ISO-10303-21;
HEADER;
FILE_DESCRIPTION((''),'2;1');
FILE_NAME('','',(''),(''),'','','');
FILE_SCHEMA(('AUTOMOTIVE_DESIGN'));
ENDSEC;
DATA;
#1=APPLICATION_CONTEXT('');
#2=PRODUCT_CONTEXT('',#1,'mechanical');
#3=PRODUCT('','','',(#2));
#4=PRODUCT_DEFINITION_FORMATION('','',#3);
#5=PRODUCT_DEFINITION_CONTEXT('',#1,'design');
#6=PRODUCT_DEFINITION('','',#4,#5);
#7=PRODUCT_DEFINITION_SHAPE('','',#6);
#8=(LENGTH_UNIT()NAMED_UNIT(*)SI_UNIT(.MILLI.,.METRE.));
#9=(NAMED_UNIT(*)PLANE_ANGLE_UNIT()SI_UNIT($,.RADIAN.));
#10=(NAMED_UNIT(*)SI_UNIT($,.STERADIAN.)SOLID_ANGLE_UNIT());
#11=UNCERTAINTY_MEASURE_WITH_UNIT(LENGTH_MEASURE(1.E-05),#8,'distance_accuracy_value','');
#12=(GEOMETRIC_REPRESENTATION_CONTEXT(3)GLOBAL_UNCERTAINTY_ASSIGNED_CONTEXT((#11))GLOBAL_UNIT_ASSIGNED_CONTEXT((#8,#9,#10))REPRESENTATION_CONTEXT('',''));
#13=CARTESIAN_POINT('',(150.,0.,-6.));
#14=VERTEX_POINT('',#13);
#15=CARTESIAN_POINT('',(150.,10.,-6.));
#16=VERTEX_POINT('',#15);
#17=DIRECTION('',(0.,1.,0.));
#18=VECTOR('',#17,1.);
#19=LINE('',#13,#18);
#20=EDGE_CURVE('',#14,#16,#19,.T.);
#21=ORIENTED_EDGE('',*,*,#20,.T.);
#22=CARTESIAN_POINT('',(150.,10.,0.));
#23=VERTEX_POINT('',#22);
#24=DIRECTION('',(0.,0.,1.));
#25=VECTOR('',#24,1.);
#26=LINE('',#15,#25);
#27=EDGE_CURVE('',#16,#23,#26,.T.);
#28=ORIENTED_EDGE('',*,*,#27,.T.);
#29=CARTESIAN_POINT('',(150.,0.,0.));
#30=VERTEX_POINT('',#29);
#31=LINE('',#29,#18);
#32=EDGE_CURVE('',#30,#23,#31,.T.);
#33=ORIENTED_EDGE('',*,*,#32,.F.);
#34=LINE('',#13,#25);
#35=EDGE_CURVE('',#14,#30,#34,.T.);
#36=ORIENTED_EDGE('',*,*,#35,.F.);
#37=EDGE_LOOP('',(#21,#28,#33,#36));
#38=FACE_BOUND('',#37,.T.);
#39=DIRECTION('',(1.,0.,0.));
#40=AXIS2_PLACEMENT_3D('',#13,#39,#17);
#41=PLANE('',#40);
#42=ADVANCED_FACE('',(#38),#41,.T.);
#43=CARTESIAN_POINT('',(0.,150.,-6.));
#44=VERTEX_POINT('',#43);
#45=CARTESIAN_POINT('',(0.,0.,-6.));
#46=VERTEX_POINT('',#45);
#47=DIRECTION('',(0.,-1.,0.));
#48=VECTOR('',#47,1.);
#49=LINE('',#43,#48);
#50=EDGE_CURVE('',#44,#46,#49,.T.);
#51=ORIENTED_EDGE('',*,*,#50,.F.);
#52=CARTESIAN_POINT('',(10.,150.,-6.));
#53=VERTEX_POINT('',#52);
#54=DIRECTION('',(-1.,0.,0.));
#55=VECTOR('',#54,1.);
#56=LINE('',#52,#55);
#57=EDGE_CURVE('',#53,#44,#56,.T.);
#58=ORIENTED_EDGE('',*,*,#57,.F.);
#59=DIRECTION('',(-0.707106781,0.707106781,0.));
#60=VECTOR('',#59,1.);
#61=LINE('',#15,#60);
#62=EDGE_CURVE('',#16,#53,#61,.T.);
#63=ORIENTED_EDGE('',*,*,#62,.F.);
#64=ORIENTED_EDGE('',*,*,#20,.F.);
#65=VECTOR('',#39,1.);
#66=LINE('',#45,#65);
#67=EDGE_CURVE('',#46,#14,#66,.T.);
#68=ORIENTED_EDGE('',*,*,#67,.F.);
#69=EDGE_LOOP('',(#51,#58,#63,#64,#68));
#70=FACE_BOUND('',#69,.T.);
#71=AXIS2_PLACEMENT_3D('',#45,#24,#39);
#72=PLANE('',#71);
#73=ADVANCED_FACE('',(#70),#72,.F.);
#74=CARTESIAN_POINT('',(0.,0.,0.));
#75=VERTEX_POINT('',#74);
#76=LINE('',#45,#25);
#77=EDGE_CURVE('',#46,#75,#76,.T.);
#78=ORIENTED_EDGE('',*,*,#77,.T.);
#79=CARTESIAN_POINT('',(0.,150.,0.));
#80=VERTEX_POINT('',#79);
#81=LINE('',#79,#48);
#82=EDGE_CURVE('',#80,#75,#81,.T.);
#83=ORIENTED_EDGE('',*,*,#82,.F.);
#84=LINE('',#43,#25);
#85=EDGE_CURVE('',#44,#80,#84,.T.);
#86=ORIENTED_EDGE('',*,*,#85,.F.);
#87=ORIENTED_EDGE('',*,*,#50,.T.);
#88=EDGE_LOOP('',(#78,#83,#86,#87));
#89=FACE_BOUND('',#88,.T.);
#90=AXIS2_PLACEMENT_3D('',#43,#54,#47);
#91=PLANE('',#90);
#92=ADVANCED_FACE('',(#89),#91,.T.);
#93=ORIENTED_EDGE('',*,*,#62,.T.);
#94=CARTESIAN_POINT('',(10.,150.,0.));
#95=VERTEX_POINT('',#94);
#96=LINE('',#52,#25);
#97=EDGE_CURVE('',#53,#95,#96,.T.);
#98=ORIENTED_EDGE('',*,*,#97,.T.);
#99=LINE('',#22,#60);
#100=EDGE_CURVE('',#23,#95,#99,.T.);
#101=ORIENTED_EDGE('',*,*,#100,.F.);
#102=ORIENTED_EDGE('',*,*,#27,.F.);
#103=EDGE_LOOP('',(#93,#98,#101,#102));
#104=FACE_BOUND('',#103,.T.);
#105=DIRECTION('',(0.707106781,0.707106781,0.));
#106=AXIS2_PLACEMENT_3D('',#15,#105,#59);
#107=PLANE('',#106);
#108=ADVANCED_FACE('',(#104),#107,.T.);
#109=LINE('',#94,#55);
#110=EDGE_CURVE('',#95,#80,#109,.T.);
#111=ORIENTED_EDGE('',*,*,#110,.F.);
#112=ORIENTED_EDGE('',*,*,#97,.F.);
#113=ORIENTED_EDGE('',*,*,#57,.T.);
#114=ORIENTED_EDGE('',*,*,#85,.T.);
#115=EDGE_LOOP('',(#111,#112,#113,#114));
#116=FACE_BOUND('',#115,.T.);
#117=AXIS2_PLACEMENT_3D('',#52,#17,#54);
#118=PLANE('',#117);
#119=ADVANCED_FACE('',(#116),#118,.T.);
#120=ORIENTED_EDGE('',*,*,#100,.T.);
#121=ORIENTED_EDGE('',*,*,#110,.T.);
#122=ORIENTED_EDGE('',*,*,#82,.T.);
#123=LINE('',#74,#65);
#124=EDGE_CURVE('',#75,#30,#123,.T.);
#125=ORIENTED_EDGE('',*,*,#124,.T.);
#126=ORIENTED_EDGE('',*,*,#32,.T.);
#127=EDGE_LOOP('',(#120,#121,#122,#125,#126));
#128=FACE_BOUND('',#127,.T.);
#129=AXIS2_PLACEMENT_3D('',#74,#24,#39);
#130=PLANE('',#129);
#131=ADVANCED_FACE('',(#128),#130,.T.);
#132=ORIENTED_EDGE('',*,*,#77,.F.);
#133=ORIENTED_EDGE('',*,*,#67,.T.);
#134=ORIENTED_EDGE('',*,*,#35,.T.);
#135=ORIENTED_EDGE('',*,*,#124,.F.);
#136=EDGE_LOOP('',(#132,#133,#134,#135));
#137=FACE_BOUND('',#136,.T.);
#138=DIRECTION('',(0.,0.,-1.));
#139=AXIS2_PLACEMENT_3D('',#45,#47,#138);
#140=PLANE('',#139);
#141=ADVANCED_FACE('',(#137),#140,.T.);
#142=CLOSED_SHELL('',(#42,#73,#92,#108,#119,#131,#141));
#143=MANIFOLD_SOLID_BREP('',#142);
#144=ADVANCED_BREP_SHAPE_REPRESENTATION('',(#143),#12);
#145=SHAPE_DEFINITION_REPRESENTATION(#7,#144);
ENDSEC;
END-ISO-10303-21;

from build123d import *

# Parameters (mm, degrees)
SM_BASE_FLANGE_1_DEPTH = 6


# Sheet-metal steps are written as plain solids
with BuildPart() as part:
    # Sketch 1 → Базовая кромка1 (new body)
    with BuildSketch(Plane.XY):
        Polygon((0, 0), (150, 0), (150, 10), (10, 150), (0, 150), align=None)
    extrude(amount=-SM_BASE_FLANGE_1_DEPTH)


solid = part.part
